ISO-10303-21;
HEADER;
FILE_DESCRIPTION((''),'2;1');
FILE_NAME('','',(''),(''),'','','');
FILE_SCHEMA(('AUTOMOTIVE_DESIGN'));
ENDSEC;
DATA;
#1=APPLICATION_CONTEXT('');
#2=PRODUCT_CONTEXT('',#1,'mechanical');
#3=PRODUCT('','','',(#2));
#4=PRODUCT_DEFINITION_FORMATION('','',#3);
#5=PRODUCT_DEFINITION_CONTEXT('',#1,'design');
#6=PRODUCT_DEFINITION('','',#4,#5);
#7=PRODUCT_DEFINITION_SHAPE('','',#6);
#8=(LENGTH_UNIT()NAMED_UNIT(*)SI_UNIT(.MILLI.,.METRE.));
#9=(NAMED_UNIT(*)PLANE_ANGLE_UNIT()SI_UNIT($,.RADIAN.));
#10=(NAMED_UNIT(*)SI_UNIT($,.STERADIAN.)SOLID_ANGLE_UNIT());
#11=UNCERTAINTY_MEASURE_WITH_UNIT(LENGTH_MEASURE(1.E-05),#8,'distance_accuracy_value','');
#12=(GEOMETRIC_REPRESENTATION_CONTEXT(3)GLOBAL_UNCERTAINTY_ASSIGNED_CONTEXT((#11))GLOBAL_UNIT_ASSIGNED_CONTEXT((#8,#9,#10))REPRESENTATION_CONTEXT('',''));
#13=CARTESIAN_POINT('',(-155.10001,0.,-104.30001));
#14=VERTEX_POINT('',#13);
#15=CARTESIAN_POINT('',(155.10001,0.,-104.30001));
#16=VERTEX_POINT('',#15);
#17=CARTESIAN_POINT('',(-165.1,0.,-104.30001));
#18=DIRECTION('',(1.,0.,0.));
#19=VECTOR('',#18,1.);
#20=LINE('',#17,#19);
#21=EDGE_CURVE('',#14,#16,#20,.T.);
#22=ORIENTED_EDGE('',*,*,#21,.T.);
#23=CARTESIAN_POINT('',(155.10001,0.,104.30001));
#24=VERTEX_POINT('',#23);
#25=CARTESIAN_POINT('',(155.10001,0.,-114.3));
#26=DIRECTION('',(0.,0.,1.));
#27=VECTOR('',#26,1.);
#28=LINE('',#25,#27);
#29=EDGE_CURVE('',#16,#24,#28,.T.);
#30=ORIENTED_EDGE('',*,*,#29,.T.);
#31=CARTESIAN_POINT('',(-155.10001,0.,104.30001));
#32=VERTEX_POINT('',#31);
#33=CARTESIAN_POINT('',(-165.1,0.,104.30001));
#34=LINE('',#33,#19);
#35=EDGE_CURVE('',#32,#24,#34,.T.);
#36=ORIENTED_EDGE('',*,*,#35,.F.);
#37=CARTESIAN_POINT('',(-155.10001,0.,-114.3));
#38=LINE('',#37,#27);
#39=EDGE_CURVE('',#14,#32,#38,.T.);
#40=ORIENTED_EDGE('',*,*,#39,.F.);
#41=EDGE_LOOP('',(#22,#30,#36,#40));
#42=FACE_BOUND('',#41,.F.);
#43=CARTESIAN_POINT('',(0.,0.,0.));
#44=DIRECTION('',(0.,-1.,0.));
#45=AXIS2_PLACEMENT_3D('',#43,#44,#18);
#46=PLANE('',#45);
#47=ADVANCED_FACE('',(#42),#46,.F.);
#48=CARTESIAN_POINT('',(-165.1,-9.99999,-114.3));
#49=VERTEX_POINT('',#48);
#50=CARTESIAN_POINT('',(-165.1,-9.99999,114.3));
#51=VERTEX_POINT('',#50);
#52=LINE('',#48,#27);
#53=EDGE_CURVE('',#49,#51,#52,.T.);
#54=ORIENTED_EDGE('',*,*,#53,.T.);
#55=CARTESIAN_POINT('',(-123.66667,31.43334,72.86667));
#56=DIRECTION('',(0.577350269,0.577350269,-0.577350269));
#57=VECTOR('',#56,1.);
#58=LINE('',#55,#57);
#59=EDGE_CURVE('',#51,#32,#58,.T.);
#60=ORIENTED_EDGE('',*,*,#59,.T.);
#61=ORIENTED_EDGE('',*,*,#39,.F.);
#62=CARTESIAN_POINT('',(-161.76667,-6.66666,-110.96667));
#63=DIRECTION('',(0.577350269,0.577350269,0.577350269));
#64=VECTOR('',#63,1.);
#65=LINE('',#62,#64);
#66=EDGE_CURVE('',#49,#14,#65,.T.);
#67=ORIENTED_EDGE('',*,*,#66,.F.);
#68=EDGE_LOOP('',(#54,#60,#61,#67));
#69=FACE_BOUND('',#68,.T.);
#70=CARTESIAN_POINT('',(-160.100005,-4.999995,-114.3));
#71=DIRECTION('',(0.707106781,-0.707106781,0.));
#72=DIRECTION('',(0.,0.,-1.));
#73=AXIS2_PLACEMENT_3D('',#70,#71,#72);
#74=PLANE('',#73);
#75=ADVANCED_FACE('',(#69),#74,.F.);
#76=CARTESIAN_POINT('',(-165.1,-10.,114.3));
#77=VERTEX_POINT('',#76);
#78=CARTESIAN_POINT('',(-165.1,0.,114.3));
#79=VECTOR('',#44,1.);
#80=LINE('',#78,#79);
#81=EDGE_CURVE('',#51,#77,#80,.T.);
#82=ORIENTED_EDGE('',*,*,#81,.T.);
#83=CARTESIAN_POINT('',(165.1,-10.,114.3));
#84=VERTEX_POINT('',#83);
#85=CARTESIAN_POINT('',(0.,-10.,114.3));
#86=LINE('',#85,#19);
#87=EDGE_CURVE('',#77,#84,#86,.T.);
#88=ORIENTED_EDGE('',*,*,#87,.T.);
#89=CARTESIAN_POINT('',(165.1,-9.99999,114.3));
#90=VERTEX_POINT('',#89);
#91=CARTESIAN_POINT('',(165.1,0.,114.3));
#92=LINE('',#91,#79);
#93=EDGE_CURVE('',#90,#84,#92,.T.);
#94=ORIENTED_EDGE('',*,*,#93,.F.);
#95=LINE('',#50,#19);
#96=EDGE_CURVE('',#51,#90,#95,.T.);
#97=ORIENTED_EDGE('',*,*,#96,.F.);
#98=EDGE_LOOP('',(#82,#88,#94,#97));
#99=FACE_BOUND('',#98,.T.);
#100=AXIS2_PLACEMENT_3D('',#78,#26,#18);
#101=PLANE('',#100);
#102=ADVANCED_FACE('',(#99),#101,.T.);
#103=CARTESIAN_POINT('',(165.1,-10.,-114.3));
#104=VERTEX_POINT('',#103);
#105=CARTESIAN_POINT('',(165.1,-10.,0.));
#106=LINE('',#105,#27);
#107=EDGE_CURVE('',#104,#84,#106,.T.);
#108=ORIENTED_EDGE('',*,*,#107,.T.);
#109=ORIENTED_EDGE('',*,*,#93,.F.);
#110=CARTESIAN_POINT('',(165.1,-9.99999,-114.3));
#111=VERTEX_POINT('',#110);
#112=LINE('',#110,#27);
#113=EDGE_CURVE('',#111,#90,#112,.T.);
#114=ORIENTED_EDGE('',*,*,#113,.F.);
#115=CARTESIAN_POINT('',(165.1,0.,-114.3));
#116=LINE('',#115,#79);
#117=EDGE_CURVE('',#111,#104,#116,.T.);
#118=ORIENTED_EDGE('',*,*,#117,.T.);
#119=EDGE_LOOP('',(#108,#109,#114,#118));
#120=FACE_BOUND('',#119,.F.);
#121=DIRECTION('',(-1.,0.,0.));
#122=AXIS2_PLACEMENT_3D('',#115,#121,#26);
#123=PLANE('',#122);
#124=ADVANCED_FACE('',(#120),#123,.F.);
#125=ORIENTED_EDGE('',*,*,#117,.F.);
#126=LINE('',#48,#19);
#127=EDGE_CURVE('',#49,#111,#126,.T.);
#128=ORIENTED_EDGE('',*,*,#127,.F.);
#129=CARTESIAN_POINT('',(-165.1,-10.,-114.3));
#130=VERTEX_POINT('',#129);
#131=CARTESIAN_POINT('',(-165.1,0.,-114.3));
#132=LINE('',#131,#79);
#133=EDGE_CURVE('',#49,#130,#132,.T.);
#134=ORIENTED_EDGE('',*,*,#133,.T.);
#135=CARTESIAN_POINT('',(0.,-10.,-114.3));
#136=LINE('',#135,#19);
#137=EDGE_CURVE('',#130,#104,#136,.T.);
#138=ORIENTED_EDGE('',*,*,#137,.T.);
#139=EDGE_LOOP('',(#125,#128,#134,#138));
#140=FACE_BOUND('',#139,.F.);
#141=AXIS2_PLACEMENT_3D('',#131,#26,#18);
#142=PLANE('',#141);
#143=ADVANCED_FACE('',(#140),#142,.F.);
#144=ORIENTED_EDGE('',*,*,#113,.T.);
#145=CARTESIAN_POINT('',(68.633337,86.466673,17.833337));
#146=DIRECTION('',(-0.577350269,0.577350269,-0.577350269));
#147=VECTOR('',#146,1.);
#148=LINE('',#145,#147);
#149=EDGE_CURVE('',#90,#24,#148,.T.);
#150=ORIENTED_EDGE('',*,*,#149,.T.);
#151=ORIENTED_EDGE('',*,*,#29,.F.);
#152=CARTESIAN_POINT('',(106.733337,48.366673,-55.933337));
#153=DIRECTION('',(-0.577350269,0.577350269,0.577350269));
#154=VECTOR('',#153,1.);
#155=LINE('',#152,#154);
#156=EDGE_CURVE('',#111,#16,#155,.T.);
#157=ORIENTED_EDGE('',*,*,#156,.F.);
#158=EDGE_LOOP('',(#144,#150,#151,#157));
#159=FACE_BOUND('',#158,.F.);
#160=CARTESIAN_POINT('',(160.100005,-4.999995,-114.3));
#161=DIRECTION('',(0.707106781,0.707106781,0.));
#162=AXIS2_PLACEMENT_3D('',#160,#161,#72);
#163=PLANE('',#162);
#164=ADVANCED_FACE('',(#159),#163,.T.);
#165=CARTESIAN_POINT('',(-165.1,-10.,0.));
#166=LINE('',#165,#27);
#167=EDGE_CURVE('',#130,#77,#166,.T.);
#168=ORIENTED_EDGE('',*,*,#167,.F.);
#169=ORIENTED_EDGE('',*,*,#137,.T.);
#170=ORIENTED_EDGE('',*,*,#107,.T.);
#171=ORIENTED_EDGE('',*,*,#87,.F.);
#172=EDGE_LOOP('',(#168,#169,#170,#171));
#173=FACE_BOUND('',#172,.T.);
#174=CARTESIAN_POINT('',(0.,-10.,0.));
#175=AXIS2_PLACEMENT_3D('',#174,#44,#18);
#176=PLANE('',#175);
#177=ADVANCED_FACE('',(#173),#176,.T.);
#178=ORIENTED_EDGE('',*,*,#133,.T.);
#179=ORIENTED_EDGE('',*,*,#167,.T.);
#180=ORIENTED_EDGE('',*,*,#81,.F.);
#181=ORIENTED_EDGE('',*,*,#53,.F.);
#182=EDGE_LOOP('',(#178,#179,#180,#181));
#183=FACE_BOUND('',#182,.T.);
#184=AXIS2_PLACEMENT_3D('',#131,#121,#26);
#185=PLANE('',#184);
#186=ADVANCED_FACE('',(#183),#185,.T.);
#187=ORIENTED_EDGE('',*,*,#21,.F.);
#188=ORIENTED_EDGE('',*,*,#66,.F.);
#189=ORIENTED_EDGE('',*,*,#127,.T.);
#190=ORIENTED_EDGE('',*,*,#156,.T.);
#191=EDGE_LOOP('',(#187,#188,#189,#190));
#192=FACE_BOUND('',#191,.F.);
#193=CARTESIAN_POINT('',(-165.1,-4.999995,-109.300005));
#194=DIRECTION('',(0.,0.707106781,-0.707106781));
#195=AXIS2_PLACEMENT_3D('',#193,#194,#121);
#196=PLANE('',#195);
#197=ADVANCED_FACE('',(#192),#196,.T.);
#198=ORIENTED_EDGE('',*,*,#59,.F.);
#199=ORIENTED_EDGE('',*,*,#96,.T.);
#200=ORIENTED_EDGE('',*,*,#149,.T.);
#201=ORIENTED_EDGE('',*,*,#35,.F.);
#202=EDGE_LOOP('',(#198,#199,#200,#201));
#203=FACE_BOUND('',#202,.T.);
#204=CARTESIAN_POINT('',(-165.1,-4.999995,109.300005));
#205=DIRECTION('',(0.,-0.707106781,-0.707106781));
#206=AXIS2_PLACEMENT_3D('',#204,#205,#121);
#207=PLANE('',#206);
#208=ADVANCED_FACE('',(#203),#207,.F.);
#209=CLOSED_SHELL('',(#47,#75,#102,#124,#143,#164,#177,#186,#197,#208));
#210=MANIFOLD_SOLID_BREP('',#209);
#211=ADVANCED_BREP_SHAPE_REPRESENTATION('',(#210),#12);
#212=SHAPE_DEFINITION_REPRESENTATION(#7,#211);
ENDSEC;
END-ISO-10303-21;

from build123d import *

# Parameters (mm, degrees)
F1_W     = 330.2
F1_H     = 228.6
F2_DEPTH = 10
F3_SIZE  = 9.99999


# Not quite as in the source:
# - a fillet or chamfer is up to 0.001 mm smaller than in the source, because OpenCascade refuses the exact size


with BuildPart() as f2:
    # F1 (on face) → F2 (new body)
    with BuildSketch(Plane.XZ):
        Rectangle(F1_W, F1_H)
    extrude(amount=F2_DEPTH)

    # F3 (size 10 in the source; OpenCascade refuses exactly that, so slightly less here)
    f3_edges = [f2.edges().sort_by_distance(p)[0] for p in [
        (0, 0, 114.3),
        (165.1, 0, 0),
        (-165.1, 0, 0),
        (0, 0, -114.3),
    ]]
    chamfer(f3_edges, length=F3_SIZE)


solid = f2.part
